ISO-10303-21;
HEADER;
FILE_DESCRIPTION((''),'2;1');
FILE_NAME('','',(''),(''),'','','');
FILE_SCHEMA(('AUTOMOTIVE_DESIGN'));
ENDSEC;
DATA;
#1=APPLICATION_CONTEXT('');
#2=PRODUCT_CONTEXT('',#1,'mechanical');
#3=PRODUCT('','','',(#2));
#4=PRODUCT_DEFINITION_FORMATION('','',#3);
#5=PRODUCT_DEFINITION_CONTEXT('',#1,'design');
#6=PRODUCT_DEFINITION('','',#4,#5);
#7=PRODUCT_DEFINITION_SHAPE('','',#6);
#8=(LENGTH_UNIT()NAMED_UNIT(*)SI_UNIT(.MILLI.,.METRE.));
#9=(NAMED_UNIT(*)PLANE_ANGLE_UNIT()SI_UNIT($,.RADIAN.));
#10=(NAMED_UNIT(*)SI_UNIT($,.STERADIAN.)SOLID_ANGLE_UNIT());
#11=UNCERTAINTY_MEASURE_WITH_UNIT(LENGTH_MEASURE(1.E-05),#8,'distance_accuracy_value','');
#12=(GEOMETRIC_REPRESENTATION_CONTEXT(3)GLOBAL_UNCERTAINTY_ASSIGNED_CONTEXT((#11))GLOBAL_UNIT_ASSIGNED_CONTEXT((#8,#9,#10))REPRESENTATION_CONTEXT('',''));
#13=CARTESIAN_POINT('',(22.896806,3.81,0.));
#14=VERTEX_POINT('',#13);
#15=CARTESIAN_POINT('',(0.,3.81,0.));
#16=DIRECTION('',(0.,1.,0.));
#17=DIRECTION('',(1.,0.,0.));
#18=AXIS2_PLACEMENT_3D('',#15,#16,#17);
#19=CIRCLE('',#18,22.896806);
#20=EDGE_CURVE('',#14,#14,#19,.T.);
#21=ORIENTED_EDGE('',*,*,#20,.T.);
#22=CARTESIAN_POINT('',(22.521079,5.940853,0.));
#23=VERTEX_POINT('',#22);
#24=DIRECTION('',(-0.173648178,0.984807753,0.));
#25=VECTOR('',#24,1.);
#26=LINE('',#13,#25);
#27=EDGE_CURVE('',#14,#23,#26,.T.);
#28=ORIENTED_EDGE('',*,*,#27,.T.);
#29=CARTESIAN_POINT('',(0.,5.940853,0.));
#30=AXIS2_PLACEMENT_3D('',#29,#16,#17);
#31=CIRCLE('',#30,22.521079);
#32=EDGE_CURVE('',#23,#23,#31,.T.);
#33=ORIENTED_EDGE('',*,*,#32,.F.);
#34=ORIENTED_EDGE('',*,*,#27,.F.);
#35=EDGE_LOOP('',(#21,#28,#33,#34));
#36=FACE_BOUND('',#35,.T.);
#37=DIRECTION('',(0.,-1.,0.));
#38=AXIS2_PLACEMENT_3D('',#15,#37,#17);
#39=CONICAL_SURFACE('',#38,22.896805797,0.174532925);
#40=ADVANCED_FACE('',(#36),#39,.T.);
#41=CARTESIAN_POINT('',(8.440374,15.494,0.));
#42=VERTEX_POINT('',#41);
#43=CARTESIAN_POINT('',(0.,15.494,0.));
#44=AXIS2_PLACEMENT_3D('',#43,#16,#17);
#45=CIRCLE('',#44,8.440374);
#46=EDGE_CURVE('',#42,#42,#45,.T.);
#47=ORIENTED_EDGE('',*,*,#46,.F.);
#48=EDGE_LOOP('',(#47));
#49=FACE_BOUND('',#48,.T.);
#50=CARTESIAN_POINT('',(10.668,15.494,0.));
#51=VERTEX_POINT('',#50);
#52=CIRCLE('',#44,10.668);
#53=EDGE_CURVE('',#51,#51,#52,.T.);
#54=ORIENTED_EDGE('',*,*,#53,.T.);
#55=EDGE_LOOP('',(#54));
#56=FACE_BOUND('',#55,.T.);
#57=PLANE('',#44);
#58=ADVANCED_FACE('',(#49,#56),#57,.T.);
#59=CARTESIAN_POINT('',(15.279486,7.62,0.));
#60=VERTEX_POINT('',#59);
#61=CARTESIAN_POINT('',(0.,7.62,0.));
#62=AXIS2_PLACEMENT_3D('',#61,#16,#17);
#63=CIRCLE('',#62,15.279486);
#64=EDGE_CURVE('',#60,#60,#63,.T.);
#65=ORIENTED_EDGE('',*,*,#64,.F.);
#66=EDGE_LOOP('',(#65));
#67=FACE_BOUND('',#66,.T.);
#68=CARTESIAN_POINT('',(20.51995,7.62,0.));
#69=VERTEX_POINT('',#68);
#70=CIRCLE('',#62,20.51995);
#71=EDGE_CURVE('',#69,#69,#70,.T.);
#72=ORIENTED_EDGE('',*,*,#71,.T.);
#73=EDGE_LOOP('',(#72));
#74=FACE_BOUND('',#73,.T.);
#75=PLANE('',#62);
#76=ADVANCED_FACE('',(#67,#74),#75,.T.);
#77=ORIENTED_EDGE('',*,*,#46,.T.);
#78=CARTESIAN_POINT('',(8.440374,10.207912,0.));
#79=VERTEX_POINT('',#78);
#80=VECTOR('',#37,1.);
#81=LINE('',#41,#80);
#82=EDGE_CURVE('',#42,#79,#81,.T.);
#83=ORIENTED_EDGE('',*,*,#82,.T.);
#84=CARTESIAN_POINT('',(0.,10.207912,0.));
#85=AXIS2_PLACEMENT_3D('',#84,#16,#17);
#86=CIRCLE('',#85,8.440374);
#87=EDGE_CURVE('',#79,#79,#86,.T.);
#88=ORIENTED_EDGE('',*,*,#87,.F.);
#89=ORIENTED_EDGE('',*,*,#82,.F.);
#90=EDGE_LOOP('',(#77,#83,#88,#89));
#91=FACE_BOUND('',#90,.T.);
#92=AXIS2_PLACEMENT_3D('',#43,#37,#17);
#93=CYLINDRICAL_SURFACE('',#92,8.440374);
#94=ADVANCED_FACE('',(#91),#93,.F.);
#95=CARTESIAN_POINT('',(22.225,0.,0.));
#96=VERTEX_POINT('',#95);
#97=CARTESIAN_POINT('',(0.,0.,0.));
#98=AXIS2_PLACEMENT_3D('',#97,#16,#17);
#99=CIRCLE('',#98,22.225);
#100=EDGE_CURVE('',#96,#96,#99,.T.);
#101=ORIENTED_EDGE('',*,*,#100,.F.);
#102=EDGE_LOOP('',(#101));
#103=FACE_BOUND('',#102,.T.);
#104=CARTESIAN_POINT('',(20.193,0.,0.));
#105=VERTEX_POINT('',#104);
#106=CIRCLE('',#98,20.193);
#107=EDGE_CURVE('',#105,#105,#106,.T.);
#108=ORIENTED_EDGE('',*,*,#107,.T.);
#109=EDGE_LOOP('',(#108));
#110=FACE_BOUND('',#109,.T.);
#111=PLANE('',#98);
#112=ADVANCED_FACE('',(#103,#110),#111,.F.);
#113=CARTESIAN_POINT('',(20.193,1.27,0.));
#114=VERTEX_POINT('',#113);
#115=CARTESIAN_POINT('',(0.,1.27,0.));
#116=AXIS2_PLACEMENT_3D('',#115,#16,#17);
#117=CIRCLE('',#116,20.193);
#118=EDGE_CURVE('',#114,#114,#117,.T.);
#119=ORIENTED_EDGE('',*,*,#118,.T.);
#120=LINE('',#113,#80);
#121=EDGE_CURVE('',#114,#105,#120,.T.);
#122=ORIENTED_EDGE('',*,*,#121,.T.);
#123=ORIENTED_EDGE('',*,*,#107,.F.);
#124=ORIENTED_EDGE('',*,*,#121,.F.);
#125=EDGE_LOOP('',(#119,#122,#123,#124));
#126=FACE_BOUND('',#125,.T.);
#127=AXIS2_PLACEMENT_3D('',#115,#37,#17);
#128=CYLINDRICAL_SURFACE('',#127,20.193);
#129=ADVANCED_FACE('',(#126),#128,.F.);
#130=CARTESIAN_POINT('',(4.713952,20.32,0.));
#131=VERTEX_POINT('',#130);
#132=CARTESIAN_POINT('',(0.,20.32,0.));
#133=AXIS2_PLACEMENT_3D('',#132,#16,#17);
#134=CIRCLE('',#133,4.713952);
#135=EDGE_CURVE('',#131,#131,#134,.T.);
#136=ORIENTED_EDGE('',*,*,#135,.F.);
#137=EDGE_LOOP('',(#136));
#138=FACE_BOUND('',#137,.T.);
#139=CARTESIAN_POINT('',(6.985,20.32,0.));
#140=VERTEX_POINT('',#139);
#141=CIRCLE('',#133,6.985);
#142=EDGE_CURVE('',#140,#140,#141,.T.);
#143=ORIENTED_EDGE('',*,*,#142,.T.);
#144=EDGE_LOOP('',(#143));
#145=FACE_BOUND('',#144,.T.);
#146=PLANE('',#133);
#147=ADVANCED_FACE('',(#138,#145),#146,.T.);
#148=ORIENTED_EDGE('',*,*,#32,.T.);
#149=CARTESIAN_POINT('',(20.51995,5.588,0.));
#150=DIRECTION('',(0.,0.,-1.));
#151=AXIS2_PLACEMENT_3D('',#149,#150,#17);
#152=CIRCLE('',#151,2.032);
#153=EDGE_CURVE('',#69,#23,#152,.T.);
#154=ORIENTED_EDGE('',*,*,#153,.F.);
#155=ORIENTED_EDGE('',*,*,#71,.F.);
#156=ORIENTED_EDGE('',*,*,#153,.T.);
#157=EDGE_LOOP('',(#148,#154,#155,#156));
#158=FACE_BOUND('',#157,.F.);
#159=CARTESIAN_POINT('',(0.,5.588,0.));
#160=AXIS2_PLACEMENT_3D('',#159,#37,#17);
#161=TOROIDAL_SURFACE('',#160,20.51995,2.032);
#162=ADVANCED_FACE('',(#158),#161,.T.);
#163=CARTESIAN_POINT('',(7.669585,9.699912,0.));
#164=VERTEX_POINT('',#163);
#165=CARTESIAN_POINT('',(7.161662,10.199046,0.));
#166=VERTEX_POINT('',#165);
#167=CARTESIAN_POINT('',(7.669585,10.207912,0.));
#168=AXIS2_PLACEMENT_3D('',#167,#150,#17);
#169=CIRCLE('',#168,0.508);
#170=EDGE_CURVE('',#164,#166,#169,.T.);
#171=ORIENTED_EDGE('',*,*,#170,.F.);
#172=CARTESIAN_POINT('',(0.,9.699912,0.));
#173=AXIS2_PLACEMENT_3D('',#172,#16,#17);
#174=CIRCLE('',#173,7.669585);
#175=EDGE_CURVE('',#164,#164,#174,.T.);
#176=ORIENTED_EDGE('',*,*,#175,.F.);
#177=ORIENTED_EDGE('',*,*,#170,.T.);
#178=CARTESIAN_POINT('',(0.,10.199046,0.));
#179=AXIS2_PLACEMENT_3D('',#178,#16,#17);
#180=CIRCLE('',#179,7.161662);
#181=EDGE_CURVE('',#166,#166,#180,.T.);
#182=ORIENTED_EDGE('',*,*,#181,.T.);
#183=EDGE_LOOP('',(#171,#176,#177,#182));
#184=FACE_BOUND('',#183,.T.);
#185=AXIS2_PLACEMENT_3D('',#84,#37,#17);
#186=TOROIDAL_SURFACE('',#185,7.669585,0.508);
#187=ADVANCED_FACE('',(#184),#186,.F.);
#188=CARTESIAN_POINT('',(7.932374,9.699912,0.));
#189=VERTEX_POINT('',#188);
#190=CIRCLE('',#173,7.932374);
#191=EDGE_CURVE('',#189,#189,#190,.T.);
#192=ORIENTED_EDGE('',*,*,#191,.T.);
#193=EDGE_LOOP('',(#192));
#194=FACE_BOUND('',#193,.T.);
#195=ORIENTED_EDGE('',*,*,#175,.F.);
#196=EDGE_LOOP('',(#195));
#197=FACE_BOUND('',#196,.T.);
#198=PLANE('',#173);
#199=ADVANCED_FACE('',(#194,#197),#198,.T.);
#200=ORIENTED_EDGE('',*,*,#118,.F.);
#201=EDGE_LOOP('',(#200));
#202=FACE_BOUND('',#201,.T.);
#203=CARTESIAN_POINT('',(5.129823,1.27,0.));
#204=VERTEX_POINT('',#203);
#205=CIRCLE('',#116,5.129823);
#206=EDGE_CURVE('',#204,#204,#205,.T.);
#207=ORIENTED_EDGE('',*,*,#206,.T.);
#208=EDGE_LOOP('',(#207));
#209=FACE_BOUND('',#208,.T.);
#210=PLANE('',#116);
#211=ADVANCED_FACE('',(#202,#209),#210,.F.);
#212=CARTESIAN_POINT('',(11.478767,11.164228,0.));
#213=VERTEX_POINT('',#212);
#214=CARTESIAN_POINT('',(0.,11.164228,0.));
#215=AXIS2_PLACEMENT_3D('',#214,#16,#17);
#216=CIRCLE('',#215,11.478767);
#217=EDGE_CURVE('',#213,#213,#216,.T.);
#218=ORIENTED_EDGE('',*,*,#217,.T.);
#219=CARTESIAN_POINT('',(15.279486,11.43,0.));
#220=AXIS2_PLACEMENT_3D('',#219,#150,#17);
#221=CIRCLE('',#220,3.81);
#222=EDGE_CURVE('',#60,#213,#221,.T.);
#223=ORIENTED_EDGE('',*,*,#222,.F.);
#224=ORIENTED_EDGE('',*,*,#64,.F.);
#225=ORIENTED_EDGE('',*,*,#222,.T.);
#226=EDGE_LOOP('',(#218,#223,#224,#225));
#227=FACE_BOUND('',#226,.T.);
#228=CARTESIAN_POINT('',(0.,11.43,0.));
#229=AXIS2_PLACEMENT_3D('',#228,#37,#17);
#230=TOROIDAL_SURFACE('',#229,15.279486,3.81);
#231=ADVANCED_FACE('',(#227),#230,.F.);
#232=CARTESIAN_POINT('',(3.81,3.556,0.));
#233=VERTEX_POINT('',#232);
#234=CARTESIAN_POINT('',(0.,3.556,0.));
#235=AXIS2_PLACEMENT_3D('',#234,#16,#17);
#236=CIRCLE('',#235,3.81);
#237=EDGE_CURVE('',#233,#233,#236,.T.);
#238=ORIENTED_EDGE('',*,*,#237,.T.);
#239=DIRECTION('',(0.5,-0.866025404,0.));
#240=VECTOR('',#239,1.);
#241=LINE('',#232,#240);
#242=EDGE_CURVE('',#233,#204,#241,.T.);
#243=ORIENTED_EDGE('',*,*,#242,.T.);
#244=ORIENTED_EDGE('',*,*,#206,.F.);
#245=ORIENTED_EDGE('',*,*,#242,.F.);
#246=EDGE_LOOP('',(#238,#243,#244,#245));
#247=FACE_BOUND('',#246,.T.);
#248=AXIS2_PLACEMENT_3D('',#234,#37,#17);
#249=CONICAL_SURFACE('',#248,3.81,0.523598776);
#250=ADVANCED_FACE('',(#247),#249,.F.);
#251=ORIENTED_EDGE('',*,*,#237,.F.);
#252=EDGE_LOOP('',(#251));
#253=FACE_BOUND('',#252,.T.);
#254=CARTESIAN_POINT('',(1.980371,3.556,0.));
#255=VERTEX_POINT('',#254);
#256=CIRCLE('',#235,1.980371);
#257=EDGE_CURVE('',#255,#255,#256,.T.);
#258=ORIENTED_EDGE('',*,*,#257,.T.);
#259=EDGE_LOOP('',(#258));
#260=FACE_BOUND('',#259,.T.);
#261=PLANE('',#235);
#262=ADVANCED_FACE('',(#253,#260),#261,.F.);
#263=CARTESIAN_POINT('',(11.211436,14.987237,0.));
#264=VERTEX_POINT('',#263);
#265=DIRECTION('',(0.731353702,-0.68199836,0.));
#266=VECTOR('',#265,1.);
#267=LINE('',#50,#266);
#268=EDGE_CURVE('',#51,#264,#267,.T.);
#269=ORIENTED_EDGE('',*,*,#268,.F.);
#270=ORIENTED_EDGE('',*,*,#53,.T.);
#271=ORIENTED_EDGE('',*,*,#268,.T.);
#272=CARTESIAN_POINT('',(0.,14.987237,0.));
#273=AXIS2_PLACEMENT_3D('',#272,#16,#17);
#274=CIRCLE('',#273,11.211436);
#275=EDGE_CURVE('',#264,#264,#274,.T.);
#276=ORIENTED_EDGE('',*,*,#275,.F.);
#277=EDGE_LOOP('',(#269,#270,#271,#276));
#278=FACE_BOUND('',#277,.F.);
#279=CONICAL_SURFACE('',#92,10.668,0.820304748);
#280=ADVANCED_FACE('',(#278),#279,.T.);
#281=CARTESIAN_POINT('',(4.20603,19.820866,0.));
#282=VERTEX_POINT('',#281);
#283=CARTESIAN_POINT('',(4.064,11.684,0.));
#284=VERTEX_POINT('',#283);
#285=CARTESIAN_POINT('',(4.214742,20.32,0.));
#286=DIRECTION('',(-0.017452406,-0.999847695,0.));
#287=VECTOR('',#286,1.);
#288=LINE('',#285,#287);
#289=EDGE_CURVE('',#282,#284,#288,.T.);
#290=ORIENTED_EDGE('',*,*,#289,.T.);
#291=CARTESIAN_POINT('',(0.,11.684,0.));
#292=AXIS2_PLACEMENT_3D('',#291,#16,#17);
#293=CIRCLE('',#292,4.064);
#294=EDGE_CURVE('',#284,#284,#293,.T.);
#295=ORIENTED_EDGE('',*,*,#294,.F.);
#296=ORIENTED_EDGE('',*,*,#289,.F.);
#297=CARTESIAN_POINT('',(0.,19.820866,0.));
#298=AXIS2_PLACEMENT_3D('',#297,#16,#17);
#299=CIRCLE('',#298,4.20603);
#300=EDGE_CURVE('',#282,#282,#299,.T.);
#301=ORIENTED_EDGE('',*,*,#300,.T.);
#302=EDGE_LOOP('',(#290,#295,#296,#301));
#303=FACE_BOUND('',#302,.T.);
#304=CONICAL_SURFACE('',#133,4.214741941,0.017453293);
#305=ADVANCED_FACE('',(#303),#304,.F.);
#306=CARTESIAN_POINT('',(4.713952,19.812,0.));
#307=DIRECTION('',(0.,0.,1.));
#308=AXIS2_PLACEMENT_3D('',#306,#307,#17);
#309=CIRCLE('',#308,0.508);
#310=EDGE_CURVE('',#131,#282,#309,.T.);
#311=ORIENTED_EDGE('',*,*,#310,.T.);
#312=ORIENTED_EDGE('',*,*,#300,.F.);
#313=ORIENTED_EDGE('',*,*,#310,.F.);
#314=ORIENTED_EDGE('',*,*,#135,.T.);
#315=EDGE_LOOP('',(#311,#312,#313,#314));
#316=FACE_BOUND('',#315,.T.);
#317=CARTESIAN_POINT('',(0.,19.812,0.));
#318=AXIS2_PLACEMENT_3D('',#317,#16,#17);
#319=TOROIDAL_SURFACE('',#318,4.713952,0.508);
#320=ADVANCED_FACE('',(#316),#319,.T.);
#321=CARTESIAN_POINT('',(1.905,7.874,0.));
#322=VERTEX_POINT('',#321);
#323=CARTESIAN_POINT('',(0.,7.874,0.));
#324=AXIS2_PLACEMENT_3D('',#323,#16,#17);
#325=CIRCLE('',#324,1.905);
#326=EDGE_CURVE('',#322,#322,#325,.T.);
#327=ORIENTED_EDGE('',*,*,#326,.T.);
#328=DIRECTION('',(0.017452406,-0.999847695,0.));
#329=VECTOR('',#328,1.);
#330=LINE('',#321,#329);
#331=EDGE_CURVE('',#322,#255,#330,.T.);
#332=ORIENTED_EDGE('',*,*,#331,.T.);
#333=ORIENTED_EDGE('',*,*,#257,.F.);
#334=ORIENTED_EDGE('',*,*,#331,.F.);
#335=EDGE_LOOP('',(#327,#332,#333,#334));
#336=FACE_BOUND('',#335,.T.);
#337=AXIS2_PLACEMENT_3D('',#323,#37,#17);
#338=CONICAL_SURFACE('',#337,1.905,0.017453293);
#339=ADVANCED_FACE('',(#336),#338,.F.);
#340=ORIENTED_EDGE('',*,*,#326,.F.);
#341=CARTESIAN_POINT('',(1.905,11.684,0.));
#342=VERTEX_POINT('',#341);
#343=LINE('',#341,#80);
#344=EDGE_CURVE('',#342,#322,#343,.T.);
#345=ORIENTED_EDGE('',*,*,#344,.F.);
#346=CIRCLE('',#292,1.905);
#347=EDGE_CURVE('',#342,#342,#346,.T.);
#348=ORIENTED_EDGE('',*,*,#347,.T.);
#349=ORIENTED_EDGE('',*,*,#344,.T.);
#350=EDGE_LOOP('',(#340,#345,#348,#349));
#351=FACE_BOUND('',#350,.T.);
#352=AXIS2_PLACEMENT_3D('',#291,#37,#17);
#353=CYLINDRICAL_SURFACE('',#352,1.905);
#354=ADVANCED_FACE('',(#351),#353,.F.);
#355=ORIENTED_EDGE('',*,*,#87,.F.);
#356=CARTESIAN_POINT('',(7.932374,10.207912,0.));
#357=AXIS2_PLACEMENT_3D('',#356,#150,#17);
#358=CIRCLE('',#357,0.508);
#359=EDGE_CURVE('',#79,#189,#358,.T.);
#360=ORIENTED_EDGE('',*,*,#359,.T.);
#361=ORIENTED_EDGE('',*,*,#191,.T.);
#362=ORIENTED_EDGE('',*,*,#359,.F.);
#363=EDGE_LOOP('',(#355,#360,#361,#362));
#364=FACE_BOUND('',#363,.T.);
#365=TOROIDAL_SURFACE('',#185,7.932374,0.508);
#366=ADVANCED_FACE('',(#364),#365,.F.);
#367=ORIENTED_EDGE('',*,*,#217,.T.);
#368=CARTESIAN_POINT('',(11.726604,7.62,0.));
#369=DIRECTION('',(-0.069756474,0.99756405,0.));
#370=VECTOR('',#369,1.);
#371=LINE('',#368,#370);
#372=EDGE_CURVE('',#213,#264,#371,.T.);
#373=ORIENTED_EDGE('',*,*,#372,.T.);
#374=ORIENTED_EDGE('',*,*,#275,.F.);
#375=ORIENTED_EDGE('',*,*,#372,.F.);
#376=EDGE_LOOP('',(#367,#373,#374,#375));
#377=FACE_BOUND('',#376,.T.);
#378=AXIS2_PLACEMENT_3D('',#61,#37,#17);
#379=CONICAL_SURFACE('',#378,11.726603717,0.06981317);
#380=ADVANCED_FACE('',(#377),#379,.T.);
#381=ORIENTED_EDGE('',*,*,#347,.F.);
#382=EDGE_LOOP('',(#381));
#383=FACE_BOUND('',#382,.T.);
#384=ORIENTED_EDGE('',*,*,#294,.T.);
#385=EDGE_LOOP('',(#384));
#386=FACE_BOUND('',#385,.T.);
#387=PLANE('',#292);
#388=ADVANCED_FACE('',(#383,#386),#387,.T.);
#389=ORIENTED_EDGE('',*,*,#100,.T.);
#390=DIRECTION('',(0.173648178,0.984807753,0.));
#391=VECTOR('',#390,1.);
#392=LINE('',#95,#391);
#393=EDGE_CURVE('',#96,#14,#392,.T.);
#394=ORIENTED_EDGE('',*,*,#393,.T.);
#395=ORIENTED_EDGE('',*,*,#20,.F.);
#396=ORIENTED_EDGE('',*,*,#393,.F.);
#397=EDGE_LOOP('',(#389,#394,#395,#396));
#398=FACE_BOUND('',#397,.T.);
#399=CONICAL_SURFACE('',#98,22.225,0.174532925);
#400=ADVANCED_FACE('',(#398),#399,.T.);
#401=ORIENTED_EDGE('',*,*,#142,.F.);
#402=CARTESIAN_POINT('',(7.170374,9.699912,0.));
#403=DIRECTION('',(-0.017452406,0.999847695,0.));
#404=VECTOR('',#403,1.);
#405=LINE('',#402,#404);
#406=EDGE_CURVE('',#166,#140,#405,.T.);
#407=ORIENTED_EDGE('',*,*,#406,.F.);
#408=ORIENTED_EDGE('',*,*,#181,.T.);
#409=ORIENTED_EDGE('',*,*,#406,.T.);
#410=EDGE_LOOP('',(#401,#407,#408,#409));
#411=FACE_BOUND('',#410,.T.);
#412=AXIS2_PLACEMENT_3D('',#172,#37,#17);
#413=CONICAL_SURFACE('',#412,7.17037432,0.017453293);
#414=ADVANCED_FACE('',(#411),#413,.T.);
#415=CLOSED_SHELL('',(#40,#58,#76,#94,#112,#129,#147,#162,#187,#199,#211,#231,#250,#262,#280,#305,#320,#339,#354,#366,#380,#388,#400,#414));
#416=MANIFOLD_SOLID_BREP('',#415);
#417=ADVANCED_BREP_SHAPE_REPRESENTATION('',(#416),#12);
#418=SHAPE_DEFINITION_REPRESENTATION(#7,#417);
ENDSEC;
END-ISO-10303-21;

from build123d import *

# Parameters (mm, degrees)
F2_R    = 3.81
F3_R    = 2.032
F4_R    = 0.508
F5_SIZE = 0.508


# Not quite as in the source:
# - two fillets or chamfers of one size are made in one step


with BuildPart() as f1:
    # F0 (on Top) → F1 (revolve)
    with BuildSketch(Plane.XY):
        Polygon((4.064, 11.684), (1.905, 11.684), (1.905, 7.874), (1.9803709704, 3.556), (3.81, 3.556), (5.1298227154, 1.27), (20.193, 1.27), (20.193, 0), (22.225, 0), (22.8968057965, 3.81), (22.225, 7.62), (11.7266037172, 7.62), (11.176, 15.494), (8.44037432, 15.494), (8.44037432, 9.6999123219), (7.17037432, 9.6999123219), (6.985, 20.32), (4.2147419407, 20.32), align=None)
    revolve(axis=Axis((0, 28.982443735, 0), (0, 1, 0)))

    # F2
    f2_edges = [f1.edges().sort_by_distance(p)[0] for p in [
        (-11.726604, 7.62, 0),
    ]]
    fillet(f2_edges, radius=F2_R)

    # F3
    f3_edges = [f1.edges().sort_by_distance(p)[0] for p in [
        (-22.225, 7.62, 0),
    ]]
    fillet(f3_edges, radius=F3_R)

    # F4
    f4_edges = [f1.edges().sort_by_distance(p)[0] for p in [
        (-8.440374, 9.699912, 0),
        (-7.170374, 9.699912, 0),
        (-4.214742, 20.32, 0),
    ]]
    fillet(f4_edges, radius=F4_R)

    # F5
    f5_edges = [f1.edges().sort_by_distance(p)[0] for p in [
        (-11.176, 15.494, 0),
    ]]
    chamfer(f5_edges, length=F5_SIZE)


solid = f1.part
